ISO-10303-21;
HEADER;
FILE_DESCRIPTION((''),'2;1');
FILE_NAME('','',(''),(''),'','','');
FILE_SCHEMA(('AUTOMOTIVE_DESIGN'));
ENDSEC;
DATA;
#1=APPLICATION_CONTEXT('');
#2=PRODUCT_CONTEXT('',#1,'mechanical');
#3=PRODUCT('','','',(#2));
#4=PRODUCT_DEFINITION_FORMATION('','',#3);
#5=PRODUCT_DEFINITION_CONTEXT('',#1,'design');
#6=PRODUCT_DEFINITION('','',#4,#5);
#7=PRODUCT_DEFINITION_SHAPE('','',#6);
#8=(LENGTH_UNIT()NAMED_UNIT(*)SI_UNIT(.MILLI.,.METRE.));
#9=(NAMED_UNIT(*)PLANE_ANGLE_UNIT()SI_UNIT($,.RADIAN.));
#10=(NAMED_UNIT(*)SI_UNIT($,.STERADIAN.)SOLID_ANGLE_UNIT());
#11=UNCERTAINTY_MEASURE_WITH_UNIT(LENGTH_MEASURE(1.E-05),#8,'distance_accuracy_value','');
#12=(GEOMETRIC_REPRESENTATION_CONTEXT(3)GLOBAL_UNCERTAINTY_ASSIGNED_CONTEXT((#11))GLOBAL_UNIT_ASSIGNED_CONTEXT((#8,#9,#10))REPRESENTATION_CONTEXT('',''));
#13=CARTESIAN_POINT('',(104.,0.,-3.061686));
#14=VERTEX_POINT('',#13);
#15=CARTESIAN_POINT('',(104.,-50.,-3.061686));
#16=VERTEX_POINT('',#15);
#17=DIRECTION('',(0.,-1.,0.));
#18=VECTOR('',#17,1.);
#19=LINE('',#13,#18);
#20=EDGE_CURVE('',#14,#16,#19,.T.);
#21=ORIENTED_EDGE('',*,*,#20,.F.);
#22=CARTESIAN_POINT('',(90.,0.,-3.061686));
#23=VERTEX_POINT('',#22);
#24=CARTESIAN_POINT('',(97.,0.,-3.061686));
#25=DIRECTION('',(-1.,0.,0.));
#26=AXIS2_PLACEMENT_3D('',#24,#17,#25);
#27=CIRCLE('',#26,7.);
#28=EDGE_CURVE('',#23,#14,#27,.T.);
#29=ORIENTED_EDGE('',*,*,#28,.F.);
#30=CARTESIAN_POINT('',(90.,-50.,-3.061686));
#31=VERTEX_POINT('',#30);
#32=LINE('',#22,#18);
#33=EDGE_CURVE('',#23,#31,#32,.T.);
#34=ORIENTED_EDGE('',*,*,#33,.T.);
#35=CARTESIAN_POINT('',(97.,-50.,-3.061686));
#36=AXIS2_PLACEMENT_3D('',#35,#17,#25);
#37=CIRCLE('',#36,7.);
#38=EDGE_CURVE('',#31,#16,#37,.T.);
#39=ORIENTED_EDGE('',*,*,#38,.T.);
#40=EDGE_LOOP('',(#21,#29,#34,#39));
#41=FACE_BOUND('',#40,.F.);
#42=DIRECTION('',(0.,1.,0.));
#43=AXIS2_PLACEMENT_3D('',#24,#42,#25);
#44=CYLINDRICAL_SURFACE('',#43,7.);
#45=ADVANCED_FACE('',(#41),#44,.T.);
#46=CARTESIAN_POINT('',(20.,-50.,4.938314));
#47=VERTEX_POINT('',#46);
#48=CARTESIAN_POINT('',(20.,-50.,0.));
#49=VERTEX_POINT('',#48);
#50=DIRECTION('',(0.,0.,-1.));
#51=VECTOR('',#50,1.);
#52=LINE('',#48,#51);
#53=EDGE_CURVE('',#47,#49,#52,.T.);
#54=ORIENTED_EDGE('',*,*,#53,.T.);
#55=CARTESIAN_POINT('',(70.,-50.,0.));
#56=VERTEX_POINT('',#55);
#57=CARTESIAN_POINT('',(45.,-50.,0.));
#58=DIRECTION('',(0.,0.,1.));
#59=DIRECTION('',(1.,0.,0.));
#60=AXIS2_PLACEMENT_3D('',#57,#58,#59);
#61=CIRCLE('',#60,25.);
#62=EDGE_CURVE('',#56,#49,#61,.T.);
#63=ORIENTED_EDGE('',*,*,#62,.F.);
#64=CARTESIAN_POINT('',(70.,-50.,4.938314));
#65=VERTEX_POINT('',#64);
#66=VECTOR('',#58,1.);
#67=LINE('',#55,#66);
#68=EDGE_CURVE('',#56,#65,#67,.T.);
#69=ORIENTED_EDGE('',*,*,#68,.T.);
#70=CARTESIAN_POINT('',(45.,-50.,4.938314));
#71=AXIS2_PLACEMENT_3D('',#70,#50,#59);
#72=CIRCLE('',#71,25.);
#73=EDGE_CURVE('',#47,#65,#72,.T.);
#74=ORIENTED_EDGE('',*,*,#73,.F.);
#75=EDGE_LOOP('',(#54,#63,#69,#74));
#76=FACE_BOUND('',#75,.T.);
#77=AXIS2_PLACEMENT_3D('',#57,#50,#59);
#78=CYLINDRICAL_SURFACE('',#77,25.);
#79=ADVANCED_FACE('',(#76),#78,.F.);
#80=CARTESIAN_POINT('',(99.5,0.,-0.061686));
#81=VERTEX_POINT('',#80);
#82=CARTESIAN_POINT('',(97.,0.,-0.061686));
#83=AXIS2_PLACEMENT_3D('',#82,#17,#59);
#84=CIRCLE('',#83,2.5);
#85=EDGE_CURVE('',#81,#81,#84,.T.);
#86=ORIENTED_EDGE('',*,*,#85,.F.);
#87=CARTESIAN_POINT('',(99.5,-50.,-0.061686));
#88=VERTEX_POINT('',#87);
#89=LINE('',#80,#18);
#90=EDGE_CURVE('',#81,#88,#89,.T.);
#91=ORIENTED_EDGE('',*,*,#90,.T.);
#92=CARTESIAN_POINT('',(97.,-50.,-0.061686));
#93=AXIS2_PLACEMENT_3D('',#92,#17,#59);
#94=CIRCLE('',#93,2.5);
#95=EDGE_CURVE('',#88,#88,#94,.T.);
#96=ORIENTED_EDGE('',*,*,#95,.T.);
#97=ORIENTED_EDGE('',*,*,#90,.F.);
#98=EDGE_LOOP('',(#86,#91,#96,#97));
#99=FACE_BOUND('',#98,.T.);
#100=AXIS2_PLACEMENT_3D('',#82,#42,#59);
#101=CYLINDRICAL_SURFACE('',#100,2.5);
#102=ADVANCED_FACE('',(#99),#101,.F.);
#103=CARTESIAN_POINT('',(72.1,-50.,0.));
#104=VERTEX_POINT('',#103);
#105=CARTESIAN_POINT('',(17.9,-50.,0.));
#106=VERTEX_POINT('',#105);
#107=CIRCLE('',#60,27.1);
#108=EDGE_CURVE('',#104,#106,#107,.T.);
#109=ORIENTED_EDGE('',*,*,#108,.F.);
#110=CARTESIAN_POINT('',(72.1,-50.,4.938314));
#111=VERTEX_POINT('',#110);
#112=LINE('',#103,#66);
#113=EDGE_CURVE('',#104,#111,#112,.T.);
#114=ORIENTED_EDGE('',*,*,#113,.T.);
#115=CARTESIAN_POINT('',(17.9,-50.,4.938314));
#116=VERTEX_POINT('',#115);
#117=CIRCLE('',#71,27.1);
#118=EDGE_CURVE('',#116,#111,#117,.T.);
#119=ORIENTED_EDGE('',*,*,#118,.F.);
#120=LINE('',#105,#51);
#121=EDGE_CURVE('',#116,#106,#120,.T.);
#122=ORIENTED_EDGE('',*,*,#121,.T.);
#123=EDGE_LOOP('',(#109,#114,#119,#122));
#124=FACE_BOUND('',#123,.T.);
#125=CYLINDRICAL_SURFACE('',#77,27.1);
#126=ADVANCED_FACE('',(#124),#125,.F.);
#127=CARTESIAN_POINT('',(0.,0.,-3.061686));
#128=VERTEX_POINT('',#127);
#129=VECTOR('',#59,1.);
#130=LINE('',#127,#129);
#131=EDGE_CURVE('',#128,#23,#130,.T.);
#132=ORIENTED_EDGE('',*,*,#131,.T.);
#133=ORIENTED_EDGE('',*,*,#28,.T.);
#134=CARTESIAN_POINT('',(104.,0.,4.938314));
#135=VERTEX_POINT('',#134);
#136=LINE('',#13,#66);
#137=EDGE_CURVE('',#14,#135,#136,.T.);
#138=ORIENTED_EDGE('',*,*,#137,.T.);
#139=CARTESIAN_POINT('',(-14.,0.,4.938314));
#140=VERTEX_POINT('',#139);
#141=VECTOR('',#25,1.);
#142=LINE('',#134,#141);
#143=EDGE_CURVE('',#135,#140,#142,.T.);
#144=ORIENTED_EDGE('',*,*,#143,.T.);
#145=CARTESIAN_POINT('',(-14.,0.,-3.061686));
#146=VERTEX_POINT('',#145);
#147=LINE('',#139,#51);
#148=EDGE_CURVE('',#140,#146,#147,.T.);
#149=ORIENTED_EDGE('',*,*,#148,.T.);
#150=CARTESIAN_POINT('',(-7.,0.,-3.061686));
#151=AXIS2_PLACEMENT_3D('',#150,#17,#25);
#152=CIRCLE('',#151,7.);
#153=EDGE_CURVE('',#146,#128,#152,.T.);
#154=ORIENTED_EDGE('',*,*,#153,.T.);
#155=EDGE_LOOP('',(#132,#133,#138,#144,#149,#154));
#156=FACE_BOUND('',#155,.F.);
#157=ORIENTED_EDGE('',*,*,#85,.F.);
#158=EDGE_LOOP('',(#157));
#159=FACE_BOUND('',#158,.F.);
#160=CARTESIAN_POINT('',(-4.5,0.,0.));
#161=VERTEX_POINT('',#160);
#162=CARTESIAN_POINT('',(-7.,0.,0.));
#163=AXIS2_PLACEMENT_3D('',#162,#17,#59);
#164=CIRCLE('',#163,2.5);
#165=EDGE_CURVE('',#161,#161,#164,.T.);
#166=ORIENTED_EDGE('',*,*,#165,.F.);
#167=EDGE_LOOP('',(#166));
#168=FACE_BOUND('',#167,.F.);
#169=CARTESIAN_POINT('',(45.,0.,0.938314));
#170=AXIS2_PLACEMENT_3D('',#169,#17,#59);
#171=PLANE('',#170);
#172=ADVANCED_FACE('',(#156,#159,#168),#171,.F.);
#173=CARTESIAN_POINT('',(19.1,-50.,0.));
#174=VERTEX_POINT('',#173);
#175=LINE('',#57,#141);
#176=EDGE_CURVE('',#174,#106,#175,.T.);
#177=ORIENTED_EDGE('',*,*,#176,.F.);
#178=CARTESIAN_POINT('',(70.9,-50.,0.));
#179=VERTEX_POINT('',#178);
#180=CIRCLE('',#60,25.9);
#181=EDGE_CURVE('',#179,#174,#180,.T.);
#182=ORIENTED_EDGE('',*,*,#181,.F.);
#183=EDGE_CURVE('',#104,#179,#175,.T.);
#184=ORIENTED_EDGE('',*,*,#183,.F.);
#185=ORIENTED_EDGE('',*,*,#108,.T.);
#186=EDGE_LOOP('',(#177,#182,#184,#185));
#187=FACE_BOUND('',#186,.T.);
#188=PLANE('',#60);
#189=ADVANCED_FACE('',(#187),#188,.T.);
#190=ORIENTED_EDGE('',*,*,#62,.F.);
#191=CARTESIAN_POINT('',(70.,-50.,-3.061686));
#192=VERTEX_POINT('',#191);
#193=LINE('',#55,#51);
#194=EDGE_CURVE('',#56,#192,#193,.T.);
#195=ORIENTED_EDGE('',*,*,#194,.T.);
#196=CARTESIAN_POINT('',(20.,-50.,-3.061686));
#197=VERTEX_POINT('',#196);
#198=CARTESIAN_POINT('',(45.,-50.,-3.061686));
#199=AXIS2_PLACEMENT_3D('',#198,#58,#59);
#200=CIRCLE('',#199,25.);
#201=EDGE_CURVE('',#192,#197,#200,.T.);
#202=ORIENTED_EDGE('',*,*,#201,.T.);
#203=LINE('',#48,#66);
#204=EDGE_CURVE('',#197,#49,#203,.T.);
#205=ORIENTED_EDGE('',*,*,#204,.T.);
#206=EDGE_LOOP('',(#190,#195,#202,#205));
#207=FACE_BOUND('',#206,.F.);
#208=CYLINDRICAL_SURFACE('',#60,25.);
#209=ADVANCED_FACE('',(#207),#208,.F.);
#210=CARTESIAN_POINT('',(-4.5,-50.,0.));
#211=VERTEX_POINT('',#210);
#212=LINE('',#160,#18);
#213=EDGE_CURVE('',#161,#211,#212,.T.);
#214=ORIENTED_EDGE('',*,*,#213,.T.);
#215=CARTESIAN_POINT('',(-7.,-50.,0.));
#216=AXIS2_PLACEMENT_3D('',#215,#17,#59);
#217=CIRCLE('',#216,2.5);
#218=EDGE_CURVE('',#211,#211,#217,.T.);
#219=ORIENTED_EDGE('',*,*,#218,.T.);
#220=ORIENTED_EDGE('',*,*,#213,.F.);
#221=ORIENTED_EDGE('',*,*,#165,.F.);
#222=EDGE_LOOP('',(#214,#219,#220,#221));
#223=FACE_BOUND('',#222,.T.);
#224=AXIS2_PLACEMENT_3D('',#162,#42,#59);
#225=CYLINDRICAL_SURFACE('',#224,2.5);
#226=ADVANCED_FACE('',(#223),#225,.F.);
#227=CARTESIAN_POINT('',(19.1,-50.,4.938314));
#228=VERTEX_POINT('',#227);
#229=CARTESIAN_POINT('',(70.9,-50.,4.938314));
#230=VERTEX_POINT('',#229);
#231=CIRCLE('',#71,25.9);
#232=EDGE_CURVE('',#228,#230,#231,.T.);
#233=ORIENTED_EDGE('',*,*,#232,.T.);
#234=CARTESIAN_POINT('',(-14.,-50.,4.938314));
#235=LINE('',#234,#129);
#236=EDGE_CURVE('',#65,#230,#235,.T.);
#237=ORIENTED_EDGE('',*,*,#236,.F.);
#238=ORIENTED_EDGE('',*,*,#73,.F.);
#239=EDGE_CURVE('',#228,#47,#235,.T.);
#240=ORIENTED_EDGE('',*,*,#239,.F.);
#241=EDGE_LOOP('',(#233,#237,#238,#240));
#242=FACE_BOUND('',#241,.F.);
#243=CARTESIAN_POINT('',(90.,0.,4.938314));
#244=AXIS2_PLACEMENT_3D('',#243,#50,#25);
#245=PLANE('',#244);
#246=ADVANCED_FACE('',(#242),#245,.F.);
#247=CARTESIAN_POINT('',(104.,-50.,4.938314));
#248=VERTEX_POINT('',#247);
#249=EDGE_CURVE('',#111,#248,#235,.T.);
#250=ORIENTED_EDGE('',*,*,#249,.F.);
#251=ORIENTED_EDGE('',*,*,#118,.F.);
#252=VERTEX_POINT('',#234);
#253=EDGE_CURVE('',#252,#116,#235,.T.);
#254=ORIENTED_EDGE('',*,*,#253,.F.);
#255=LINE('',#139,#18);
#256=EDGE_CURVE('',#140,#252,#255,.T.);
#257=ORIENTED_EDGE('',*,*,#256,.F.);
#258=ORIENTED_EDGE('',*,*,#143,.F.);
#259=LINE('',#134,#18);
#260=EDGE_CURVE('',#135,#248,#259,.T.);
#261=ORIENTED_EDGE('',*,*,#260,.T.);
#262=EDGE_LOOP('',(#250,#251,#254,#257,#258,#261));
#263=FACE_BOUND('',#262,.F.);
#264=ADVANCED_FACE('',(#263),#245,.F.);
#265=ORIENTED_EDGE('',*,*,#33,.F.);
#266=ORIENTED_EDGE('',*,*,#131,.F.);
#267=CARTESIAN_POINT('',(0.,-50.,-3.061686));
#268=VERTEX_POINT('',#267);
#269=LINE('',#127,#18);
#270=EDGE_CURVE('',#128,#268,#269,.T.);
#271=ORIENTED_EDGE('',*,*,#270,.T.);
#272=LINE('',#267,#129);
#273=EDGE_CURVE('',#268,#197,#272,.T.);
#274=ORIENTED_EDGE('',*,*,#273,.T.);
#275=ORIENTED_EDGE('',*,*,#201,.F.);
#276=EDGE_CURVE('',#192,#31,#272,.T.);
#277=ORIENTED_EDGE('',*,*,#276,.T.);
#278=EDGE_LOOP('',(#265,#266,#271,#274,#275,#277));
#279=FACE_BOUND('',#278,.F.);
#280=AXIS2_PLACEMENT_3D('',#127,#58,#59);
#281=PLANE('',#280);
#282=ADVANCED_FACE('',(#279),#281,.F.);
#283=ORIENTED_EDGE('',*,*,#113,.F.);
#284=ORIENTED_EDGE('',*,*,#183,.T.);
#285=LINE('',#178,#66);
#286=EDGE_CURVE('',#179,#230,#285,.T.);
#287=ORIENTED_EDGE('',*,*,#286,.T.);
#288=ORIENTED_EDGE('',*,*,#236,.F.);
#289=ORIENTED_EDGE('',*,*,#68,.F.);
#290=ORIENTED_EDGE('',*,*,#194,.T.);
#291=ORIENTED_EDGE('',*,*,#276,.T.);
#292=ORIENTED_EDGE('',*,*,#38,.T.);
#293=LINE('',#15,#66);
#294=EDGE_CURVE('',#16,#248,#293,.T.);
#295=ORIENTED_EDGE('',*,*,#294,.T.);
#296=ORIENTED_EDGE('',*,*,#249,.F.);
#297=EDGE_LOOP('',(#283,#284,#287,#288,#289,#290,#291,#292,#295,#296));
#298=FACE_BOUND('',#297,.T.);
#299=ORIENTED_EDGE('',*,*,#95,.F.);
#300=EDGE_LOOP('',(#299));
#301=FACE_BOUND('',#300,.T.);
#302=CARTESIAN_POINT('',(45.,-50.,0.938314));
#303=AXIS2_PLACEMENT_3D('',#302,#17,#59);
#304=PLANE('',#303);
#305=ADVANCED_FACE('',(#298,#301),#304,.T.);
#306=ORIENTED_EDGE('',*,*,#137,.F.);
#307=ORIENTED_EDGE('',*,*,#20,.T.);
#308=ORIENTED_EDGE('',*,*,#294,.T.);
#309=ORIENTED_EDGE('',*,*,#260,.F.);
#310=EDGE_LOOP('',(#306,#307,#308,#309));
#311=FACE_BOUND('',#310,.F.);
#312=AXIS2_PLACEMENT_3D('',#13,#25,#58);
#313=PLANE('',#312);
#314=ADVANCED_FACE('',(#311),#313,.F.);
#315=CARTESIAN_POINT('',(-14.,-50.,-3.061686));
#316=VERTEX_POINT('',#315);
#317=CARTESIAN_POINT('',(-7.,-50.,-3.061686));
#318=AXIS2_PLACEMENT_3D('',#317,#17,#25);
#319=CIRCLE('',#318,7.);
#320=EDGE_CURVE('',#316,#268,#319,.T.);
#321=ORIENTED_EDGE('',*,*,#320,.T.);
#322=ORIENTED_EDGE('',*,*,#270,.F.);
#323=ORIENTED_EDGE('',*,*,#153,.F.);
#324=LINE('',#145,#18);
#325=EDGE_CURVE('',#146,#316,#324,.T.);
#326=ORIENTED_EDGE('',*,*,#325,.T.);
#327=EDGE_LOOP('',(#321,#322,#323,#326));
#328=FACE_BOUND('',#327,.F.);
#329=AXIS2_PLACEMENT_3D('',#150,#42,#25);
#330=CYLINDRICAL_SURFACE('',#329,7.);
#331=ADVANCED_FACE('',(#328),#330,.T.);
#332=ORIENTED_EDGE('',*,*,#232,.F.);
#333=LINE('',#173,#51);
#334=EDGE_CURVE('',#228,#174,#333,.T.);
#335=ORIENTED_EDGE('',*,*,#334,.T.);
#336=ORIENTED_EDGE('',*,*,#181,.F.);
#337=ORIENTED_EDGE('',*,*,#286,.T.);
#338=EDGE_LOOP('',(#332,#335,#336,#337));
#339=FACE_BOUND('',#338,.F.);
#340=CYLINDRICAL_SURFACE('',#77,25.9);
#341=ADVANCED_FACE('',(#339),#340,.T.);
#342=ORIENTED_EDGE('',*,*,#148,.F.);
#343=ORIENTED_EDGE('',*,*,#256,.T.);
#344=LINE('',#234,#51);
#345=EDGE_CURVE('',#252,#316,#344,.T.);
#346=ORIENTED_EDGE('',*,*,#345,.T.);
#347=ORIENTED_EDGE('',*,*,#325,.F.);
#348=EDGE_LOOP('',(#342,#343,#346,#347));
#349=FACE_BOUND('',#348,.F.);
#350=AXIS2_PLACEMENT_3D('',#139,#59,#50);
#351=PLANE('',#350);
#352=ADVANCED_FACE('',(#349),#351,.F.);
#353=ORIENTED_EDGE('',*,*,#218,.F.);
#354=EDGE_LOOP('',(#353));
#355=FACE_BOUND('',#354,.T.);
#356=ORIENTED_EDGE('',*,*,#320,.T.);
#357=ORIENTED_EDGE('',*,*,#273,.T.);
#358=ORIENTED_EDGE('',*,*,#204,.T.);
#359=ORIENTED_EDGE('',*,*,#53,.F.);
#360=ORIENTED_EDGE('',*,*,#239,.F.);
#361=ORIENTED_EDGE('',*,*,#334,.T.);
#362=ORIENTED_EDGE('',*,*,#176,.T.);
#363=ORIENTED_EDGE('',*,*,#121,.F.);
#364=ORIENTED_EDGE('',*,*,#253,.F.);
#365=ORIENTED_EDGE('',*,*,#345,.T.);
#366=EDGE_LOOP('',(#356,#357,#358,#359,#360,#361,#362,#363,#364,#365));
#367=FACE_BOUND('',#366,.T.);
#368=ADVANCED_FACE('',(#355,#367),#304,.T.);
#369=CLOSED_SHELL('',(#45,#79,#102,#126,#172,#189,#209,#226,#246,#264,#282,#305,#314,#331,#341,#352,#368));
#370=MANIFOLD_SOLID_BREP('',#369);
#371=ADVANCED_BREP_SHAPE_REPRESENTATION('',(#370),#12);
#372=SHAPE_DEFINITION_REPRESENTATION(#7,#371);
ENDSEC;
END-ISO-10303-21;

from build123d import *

# Parameters (mm, degrees)
F0_R     = 2.5
F1_DEPTH = 50
F2_R     = 25
F3_DEPTH = 25
F4_DEPTH = 50
F5_DEPTH = 25
F6_R     = 27.1
F6_R_2   = 25.9
F7_DEPTH = 5
F8_DEPTH = 25


# Not quite as in the source:
# - a feature names something its author has since deleted; it is built from what else it names


with BuildPart() as f1:
    # F0 (on Front) → F1 (new body)
    with BuildSketch(Plane.XZ):
        Polygon((90, 4.9383143896), (0, 4.9383143896), (0, -0.0616856104), (0, -3.0616856104), (90, -3.0616856104), (90, -0.0616856104), align=None)
        with BuildLine():
            Line((0, -0.0616856104), (0, 4.9383143896))
            Line((0, 4.9383143896), (-14, 4.9383143896))
            Line((-14, 4.9383143896), (-14, -3.0616856104))
            ThreePointArc((-14, -3.0616856104), (-7, -10.0616856104), (0, -3.0616856104))
            Line((0, -3.0616856104), (0, -0.0616856104))
        make_face()
        with Locations((-7, 0)):
            Circle(F0_R, mode=Mode.SUBTRACT)
    extrude(amount=F1_DEPTH)

    # F2 (on Top) → F3 (cut)
    with BuildSketch(Plane.XY):
        with Locations((45, -50)):
            Circle(F2_R)
    extrude(amount=-F3_DEPTH, mode=Mode.SUBTRACT)

    # F0 (on Front) → F4 (join)
    with BuildSketch(Plane.XZ):
        Polygon((90, 4.9383143896), (0, 4.9383143896), (0, -0.0616856104), (0, -3.0616856104), (90, -3.0616856104), (90, -0.0616856104), align=None)
        with BuildLine():
            Line((0, -0.0616856104), (0, 4.9383143896))
            Line((0, 4.9383143896), (-14, 4.9383143896))
            Line((-14, 4.9383143896), (-14, -3.0616856104))
            ThreePointArc((-14, -3.0616856104), (-7, -10.0616856104), (0, -3.0616856104))
            Line((0, -3.0616856104), (0, -0.0616856104))
        make_face()
        with Locations((-7, 0)):
            Circle(F0_R, mode=Mode.SUBTRACT)
        with BuildLine():
            Line((104, 4.9383143896), (90, 4.9383143896))
            Line((90, 4.9383143896), (90, -0.0616856104))
            Line((90, -0.0616856104), (90, -3.0616856104))
            ThreePointArc((90, -3.0616856104), (97, -10.0616856104), (104, -3.0616856104))
            Line((104, -3.0616856104), (104, -0.0616856104))
            Line((104, -0.0616856104), (104, 4.9383143896))
        make_face()
        with Locations((97, -0.0616856104)):
            Circle(F0_R, mode=Mode.SUBTRACT)
    extrude(amount=F4_DEPTH)

    # F2 (on Top) → F5 (cut)
    with BuildSketch(Plane.XY):
        with Locations((45, -50)):
            Circle(F2_R)
    extrude(amount=-F5_DEPTH, mode=Mode.SUBTRACT)

    # F6 (on Top) → F7 (cut)
    with BuildSketch(Plane.XY):
        with Locations((45, -50)):
            Circle(F6_R)
        with Locations((45, -50)):
            Circle(F6_R_2, mode=Mode.SUBTRACT)
    extrude(amount=F7_DEPTH, mode=Mode.SUBTRACT)

    # F2 (on Top) → F8 (cut)
    with BuildSketch(Plane.XY):
        with Locations((45, -50)):
            Circle(F2_R)
    extrude(amount=F8_DEPTH, mode=Mode.SUBTRACT)


solid = f1.part
